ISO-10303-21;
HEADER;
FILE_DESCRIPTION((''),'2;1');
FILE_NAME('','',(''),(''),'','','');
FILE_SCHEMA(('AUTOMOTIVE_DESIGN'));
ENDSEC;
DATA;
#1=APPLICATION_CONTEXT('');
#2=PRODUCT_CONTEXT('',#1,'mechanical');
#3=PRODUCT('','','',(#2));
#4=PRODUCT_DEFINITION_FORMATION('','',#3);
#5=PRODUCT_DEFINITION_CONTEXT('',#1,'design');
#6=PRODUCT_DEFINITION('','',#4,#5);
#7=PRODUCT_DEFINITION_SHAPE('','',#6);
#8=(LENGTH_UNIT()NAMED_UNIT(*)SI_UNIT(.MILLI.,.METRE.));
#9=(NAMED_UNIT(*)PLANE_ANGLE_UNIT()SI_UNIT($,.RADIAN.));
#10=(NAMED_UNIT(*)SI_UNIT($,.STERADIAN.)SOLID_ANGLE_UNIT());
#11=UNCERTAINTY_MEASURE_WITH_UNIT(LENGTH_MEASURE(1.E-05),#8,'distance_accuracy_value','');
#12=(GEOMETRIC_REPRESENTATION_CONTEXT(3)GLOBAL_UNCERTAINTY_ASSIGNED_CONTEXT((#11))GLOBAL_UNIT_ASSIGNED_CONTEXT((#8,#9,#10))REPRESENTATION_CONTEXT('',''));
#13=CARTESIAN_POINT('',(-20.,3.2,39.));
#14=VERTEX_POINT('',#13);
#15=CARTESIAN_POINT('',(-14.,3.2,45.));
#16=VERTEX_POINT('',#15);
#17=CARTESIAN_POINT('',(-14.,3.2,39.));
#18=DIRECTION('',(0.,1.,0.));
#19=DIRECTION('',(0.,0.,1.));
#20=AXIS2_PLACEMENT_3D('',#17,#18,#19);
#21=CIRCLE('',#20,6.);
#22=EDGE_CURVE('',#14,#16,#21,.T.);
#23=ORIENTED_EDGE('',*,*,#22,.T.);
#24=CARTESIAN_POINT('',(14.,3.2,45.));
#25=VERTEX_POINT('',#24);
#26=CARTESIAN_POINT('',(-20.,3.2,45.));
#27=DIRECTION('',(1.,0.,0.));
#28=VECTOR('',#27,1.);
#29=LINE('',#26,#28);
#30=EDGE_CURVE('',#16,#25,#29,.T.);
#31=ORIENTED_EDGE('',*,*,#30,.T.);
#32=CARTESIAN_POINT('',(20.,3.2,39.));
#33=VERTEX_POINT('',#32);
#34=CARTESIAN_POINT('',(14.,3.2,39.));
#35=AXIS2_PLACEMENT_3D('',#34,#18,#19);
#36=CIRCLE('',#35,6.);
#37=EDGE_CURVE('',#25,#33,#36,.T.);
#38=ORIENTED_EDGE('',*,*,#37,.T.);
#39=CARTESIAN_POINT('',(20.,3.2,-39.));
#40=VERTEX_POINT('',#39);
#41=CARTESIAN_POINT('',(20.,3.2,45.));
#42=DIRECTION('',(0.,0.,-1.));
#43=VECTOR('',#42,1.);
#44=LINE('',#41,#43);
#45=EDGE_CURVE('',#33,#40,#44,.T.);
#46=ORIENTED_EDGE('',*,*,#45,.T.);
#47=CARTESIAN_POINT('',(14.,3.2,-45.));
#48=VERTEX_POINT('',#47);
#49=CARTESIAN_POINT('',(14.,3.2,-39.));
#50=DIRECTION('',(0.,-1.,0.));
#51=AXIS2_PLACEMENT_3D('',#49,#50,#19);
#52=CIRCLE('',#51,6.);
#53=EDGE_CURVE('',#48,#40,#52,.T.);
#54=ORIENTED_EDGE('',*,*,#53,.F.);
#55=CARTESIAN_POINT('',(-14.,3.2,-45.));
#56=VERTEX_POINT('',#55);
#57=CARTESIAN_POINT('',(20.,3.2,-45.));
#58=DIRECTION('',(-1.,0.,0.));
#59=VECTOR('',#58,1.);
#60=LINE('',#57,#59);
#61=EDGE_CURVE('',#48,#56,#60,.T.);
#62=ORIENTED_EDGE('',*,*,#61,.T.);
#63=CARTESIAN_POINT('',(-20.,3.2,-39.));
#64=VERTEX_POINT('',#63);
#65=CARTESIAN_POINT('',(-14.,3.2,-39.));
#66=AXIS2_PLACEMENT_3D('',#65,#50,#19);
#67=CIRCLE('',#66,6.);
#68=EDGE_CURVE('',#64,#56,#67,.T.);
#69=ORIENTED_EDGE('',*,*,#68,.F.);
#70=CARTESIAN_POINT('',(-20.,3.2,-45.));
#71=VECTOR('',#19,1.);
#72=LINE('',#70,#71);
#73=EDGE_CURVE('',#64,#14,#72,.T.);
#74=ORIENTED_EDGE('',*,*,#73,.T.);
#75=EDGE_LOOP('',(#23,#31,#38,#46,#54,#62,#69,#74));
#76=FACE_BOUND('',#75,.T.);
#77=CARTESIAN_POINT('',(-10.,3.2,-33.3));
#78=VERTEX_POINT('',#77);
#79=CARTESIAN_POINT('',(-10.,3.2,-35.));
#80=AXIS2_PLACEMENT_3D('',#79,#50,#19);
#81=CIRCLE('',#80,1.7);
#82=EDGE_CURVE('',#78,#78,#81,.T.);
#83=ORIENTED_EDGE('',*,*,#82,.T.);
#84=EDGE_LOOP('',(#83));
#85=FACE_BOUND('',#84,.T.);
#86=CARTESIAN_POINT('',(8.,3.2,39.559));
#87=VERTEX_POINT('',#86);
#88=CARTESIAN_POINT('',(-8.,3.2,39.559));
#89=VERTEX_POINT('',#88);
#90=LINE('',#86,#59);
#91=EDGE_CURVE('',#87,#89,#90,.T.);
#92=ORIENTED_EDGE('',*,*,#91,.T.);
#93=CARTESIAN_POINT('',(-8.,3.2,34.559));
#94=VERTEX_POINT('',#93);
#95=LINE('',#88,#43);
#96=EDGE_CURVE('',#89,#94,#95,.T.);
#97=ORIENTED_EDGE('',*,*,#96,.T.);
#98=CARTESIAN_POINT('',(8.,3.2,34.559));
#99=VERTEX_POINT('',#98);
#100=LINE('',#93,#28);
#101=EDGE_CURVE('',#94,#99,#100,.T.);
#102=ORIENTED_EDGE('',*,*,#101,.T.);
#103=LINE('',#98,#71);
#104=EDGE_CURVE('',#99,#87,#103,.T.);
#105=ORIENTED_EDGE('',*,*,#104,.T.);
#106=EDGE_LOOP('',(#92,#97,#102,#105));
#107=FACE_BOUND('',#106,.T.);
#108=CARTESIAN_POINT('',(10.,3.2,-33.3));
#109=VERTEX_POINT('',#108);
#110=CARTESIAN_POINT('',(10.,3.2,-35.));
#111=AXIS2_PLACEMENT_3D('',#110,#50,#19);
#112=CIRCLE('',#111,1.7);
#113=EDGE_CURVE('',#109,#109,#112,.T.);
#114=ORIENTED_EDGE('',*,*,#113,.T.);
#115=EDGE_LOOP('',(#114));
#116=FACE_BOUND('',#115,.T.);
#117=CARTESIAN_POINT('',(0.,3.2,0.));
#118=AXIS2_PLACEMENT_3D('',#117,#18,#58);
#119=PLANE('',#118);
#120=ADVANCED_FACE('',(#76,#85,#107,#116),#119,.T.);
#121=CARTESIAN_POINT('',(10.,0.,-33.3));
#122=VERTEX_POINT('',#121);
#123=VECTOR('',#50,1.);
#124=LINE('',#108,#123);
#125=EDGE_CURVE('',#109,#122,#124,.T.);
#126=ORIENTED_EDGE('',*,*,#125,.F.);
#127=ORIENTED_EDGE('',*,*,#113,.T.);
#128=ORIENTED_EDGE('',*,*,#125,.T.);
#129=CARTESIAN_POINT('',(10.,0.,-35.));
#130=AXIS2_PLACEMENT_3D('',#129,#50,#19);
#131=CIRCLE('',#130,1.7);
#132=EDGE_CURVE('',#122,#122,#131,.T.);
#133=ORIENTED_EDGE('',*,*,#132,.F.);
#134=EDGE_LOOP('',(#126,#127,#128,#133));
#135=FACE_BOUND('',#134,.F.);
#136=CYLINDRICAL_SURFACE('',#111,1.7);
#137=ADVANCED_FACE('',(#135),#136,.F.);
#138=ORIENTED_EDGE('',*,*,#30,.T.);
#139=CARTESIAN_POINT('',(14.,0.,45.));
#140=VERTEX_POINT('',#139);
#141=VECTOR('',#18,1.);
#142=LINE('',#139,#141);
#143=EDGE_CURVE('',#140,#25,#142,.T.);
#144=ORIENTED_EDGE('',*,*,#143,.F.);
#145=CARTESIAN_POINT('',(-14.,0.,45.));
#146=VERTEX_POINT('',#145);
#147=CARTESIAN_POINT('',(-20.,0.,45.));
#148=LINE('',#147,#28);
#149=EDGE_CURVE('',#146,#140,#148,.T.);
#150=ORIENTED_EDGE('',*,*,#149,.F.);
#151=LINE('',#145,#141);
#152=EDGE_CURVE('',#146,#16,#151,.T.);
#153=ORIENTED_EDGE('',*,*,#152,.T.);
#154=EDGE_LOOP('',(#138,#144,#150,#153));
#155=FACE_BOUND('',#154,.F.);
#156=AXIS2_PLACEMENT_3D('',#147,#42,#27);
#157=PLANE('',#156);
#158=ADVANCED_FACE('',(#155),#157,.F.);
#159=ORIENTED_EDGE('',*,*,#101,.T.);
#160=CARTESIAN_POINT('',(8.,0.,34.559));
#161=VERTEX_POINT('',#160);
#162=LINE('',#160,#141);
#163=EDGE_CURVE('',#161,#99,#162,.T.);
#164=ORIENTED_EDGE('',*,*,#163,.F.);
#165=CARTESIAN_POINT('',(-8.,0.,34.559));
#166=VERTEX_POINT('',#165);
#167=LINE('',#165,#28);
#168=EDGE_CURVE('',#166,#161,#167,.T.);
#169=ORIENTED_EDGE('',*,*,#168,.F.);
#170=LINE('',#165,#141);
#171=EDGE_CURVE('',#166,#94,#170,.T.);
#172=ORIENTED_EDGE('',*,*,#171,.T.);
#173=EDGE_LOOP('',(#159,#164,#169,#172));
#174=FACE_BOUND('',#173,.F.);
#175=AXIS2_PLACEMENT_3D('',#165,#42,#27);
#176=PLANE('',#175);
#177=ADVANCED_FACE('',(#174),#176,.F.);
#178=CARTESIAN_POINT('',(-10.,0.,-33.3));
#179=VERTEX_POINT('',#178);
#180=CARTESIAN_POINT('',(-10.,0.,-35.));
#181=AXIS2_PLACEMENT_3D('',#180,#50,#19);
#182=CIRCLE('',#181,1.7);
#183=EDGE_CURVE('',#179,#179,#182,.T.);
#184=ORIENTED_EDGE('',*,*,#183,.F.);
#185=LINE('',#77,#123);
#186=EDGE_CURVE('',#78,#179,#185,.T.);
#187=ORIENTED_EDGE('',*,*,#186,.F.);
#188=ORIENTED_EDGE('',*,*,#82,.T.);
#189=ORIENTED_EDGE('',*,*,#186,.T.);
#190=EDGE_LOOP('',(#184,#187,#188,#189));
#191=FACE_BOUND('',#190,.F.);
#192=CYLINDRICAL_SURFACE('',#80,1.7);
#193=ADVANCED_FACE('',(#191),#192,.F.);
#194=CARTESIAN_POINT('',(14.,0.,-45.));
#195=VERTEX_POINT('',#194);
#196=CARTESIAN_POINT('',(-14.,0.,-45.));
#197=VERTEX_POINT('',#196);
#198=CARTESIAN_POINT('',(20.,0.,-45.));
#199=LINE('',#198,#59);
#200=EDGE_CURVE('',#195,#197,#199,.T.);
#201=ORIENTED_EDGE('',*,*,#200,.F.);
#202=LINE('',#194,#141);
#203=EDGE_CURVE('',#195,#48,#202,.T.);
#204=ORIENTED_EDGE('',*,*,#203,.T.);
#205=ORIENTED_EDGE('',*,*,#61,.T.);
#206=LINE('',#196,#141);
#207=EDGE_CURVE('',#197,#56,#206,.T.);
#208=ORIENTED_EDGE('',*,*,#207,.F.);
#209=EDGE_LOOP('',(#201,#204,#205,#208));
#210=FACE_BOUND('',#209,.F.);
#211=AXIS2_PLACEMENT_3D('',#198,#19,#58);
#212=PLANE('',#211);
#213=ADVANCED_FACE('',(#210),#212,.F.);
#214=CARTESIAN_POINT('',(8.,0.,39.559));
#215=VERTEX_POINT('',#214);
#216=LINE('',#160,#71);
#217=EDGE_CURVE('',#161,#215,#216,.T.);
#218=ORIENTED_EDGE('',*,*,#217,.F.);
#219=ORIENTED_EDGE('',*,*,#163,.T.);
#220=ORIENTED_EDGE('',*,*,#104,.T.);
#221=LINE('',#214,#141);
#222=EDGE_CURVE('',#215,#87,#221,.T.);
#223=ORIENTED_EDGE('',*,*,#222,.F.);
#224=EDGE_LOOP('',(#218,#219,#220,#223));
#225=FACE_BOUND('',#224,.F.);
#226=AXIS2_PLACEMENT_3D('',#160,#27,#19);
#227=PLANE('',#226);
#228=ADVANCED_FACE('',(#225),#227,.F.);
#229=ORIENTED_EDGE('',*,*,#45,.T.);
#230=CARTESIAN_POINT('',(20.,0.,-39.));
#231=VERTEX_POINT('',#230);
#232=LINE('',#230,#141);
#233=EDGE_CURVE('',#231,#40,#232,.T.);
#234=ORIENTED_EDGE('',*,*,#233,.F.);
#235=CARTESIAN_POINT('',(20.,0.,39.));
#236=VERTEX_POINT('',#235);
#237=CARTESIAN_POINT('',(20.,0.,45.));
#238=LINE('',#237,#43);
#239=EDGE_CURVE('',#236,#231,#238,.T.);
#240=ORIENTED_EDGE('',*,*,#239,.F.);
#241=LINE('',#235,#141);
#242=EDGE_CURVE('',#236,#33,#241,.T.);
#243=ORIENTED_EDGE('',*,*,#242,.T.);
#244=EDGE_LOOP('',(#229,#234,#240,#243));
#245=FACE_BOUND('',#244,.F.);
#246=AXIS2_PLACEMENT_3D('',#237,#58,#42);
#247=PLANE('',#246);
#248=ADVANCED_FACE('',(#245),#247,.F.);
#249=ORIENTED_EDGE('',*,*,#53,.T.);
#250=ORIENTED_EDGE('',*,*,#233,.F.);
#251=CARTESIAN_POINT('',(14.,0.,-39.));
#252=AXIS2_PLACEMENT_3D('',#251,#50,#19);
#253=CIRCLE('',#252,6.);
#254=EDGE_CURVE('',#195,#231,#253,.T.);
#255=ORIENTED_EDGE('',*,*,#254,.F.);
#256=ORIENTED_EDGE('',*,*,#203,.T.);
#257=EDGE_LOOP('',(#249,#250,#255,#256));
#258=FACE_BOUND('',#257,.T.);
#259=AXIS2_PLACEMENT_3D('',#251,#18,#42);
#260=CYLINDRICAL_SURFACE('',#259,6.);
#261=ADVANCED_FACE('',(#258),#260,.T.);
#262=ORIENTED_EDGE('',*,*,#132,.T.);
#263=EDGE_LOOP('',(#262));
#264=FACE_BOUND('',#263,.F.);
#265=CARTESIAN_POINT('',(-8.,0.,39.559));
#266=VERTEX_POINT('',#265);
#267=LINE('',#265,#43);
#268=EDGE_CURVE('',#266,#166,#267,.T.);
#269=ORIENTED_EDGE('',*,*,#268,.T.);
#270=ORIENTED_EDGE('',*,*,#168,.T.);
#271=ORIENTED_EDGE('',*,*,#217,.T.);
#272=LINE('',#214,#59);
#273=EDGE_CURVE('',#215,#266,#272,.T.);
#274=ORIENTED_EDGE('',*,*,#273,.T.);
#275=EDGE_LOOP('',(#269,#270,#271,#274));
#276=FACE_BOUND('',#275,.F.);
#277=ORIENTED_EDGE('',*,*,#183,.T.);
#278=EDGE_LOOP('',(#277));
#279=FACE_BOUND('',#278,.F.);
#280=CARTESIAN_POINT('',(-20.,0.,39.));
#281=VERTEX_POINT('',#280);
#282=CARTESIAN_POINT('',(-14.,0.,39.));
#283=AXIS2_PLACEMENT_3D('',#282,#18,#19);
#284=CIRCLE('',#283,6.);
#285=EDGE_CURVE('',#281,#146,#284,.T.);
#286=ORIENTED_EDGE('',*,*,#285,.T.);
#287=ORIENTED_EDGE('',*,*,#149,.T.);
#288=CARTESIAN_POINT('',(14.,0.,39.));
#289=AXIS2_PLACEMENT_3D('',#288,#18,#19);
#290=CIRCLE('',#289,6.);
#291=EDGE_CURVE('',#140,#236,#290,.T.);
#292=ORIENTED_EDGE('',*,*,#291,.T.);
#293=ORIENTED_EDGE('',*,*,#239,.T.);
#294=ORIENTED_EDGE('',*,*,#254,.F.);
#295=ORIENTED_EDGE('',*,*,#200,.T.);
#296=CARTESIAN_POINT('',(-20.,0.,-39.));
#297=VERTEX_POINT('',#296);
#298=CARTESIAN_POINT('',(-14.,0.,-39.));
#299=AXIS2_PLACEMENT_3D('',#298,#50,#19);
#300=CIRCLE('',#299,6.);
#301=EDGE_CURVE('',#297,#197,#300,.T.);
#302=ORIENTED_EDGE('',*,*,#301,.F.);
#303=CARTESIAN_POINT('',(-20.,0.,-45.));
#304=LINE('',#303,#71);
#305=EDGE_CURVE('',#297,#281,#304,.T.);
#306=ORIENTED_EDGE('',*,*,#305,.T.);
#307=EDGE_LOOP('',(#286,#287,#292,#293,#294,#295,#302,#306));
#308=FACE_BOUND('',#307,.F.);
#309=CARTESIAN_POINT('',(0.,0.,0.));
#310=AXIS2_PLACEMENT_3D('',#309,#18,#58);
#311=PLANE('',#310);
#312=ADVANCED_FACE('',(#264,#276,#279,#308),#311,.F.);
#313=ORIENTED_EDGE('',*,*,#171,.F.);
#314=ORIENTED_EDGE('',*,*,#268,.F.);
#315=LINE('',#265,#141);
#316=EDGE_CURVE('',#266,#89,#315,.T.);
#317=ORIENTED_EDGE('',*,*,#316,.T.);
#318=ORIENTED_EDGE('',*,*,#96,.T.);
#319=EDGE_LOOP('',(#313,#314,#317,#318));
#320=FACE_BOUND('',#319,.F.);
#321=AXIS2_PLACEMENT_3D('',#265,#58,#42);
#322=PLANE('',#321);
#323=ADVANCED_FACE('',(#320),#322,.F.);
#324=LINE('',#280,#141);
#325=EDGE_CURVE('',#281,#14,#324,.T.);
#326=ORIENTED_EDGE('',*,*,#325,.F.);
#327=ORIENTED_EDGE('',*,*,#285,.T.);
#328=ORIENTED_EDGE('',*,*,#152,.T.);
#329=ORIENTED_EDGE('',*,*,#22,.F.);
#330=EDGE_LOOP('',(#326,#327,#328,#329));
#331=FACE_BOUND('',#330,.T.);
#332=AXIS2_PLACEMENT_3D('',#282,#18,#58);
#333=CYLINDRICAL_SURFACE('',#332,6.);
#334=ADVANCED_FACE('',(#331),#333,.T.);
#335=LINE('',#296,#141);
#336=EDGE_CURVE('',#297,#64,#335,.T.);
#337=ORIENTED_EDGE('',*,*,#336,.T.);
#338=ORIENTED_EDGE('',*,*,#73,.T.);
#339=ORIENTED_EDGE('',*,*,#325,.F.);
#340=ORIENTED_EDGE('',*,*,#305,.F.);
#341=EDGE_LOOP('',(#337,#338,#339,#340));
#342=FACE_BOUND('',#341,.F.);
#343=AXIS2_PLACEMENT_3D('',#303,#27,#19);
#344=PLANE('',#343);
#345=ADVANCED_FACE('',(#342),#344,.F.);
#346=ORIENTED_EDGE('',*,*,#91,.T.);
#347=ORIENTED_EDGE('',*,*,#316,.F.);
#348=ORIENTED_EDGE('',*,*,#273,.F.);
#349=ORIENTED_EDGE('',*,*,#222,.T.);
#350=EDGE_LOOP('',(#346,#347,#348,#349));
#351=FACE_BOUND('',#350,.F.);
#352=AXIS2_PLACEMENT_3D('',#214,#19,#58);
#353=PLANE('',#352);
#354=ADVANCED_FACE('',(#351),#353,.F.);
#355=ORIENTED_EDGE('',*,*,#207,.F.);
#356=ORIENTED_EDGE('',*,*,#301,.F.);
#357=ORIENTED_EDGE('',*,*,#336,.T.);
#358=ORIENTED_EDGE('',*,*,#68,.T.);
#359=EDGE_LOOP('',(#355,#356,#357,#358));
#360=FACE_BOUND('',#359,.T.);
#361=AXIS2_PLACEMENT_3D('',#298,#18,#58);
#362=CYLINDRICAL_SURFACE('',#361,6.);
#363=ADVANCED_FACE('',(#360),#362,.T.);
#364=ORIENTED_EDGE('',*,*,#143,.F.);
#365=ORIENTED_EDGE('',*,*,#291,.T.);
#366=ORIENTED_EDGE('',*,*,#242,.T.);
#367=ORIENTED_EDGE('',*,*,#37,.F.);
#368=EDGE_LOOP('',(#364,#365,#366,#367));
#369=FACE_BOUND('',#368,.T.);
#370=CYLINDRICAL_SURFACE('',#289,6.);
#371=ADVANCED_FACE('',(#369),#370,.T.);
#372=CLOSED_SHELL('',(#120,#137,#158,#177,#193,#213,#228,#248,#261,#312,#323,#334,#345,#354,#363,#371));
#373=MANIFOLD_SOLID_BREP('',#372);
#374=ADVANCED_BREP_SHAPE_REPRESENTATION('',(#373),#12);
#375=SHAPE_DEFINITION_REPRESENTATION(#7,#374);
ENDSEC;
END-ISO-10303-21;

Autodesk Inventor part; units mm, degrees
ref_plane "YZ Plane" through (0, 0, 0) normal (1, 0, 0) x (0, 1, 0)
ref_plane "XZ Plane" through (0, 0, 0) normal (0, 1, 0) x (-1, 0, 0)
ref_plane "XY Plane" through (0, 0, 0) normal (0, 0, 1) x (1, 0, 0)
sketch "Sketch1" plane through (0, 0, 0) normal (0, 1, 0) x (-1, 0, 0)
  line L0 (20, 45) -> (-20, 45)
  line L1 (-20, 45) -> (-20, -45)
  line L2 (-20, -45) -> (20, -45)
  line L3 (20, -45) -> (20, 45)
  line L4 (20, 45) -> (-20, -45) construction
  line L5 (-20, 45) -> (20, -45) construction
  point P0 (0, 0)
  dimension "d0" = 40
  dimension "d1" = 90
extrude "Plate1" add sketch "Sketch1" along normal blind 3.2
sketch "Sketch2" plane through (0, 3.2, 0) normal (0, 1, 0) x (1, 0, 0)
  line L0 (-20, -45) -> (20, -45) projected
  line L1 (0, -45) -> (0, 35)
  line L2 (0, 35) -> (-10, 35)
  point P0 (0, 0)
  point P1 (10, 35)
  point P2 (10, 35)
  dimension "d3" = 80
  dimension "d4" = 10
hole "Hole1" at (-10, 3.2, -35) at (10, 3.2, -35) direction (0, -1, 0) diameter 3.4 depth 3.2 tip angle 118 clearance for "Countersunk Flat Head Screw ISO 2009/7046" size "M3" standard "ISO"
sketch "Sketch4" plane through (0, 0, 0) normal (0, -1, 0) x (1, 0, 0)
  line L0 (8, 39.559) -> (-8, 39.559)
  line L1 (-8, 39.559) -> (-8, 34.559)
  line L2 (-8, 34.559) -> (8, 34.559)
  line L3 (8, 34.559) -> (8, 39.559)
  line L4 (8, 39.559) -> (-8, 34.559) construction
  line L5 (-8, 39.559) -> (8, 34.559) construction
  line L6 (-20, 45) -> (20, 45) projected
  point P0 (0, 0)
  point P1 (0, 37.059)
  dimension "d12" = 16
  dimension "d13" = 5
  dimension "d17" = 7.941
extrude "Cut1" cut sketch "Sketch4" against normal blind 3.2
fillet "Corner Round1" radius 6 4 edges at (20, 1.6, 45) (-20, 1.6, 45) (20, 1.6, -45) (-20, 1.6, -45)
equation "\"d10\" = Thickness"
equation "\"d14\" = Thickness"
equation "\"d2\" = Thickness"
equation "\"BendReliefWidth\" = Thickness"
equation "\"BendReliefDepth\" = 0.5 * Thickness"
equation "\"CornerReliefSize\" = 4 * Thickness"
equation "\"MinimumRemnant\" = 2 * Thickness"
equation "\"TransitionRadius\" = BendRadius"
equation "\"JacobiRadiusSize\" = BendRadius"
equation "\"GapSize\" = Thickness"
equation "\"Thickness\" = 3.2"
equation "\"BendRadius\" = 1.516"
properties part number "SP40V1 Chapa Base"
